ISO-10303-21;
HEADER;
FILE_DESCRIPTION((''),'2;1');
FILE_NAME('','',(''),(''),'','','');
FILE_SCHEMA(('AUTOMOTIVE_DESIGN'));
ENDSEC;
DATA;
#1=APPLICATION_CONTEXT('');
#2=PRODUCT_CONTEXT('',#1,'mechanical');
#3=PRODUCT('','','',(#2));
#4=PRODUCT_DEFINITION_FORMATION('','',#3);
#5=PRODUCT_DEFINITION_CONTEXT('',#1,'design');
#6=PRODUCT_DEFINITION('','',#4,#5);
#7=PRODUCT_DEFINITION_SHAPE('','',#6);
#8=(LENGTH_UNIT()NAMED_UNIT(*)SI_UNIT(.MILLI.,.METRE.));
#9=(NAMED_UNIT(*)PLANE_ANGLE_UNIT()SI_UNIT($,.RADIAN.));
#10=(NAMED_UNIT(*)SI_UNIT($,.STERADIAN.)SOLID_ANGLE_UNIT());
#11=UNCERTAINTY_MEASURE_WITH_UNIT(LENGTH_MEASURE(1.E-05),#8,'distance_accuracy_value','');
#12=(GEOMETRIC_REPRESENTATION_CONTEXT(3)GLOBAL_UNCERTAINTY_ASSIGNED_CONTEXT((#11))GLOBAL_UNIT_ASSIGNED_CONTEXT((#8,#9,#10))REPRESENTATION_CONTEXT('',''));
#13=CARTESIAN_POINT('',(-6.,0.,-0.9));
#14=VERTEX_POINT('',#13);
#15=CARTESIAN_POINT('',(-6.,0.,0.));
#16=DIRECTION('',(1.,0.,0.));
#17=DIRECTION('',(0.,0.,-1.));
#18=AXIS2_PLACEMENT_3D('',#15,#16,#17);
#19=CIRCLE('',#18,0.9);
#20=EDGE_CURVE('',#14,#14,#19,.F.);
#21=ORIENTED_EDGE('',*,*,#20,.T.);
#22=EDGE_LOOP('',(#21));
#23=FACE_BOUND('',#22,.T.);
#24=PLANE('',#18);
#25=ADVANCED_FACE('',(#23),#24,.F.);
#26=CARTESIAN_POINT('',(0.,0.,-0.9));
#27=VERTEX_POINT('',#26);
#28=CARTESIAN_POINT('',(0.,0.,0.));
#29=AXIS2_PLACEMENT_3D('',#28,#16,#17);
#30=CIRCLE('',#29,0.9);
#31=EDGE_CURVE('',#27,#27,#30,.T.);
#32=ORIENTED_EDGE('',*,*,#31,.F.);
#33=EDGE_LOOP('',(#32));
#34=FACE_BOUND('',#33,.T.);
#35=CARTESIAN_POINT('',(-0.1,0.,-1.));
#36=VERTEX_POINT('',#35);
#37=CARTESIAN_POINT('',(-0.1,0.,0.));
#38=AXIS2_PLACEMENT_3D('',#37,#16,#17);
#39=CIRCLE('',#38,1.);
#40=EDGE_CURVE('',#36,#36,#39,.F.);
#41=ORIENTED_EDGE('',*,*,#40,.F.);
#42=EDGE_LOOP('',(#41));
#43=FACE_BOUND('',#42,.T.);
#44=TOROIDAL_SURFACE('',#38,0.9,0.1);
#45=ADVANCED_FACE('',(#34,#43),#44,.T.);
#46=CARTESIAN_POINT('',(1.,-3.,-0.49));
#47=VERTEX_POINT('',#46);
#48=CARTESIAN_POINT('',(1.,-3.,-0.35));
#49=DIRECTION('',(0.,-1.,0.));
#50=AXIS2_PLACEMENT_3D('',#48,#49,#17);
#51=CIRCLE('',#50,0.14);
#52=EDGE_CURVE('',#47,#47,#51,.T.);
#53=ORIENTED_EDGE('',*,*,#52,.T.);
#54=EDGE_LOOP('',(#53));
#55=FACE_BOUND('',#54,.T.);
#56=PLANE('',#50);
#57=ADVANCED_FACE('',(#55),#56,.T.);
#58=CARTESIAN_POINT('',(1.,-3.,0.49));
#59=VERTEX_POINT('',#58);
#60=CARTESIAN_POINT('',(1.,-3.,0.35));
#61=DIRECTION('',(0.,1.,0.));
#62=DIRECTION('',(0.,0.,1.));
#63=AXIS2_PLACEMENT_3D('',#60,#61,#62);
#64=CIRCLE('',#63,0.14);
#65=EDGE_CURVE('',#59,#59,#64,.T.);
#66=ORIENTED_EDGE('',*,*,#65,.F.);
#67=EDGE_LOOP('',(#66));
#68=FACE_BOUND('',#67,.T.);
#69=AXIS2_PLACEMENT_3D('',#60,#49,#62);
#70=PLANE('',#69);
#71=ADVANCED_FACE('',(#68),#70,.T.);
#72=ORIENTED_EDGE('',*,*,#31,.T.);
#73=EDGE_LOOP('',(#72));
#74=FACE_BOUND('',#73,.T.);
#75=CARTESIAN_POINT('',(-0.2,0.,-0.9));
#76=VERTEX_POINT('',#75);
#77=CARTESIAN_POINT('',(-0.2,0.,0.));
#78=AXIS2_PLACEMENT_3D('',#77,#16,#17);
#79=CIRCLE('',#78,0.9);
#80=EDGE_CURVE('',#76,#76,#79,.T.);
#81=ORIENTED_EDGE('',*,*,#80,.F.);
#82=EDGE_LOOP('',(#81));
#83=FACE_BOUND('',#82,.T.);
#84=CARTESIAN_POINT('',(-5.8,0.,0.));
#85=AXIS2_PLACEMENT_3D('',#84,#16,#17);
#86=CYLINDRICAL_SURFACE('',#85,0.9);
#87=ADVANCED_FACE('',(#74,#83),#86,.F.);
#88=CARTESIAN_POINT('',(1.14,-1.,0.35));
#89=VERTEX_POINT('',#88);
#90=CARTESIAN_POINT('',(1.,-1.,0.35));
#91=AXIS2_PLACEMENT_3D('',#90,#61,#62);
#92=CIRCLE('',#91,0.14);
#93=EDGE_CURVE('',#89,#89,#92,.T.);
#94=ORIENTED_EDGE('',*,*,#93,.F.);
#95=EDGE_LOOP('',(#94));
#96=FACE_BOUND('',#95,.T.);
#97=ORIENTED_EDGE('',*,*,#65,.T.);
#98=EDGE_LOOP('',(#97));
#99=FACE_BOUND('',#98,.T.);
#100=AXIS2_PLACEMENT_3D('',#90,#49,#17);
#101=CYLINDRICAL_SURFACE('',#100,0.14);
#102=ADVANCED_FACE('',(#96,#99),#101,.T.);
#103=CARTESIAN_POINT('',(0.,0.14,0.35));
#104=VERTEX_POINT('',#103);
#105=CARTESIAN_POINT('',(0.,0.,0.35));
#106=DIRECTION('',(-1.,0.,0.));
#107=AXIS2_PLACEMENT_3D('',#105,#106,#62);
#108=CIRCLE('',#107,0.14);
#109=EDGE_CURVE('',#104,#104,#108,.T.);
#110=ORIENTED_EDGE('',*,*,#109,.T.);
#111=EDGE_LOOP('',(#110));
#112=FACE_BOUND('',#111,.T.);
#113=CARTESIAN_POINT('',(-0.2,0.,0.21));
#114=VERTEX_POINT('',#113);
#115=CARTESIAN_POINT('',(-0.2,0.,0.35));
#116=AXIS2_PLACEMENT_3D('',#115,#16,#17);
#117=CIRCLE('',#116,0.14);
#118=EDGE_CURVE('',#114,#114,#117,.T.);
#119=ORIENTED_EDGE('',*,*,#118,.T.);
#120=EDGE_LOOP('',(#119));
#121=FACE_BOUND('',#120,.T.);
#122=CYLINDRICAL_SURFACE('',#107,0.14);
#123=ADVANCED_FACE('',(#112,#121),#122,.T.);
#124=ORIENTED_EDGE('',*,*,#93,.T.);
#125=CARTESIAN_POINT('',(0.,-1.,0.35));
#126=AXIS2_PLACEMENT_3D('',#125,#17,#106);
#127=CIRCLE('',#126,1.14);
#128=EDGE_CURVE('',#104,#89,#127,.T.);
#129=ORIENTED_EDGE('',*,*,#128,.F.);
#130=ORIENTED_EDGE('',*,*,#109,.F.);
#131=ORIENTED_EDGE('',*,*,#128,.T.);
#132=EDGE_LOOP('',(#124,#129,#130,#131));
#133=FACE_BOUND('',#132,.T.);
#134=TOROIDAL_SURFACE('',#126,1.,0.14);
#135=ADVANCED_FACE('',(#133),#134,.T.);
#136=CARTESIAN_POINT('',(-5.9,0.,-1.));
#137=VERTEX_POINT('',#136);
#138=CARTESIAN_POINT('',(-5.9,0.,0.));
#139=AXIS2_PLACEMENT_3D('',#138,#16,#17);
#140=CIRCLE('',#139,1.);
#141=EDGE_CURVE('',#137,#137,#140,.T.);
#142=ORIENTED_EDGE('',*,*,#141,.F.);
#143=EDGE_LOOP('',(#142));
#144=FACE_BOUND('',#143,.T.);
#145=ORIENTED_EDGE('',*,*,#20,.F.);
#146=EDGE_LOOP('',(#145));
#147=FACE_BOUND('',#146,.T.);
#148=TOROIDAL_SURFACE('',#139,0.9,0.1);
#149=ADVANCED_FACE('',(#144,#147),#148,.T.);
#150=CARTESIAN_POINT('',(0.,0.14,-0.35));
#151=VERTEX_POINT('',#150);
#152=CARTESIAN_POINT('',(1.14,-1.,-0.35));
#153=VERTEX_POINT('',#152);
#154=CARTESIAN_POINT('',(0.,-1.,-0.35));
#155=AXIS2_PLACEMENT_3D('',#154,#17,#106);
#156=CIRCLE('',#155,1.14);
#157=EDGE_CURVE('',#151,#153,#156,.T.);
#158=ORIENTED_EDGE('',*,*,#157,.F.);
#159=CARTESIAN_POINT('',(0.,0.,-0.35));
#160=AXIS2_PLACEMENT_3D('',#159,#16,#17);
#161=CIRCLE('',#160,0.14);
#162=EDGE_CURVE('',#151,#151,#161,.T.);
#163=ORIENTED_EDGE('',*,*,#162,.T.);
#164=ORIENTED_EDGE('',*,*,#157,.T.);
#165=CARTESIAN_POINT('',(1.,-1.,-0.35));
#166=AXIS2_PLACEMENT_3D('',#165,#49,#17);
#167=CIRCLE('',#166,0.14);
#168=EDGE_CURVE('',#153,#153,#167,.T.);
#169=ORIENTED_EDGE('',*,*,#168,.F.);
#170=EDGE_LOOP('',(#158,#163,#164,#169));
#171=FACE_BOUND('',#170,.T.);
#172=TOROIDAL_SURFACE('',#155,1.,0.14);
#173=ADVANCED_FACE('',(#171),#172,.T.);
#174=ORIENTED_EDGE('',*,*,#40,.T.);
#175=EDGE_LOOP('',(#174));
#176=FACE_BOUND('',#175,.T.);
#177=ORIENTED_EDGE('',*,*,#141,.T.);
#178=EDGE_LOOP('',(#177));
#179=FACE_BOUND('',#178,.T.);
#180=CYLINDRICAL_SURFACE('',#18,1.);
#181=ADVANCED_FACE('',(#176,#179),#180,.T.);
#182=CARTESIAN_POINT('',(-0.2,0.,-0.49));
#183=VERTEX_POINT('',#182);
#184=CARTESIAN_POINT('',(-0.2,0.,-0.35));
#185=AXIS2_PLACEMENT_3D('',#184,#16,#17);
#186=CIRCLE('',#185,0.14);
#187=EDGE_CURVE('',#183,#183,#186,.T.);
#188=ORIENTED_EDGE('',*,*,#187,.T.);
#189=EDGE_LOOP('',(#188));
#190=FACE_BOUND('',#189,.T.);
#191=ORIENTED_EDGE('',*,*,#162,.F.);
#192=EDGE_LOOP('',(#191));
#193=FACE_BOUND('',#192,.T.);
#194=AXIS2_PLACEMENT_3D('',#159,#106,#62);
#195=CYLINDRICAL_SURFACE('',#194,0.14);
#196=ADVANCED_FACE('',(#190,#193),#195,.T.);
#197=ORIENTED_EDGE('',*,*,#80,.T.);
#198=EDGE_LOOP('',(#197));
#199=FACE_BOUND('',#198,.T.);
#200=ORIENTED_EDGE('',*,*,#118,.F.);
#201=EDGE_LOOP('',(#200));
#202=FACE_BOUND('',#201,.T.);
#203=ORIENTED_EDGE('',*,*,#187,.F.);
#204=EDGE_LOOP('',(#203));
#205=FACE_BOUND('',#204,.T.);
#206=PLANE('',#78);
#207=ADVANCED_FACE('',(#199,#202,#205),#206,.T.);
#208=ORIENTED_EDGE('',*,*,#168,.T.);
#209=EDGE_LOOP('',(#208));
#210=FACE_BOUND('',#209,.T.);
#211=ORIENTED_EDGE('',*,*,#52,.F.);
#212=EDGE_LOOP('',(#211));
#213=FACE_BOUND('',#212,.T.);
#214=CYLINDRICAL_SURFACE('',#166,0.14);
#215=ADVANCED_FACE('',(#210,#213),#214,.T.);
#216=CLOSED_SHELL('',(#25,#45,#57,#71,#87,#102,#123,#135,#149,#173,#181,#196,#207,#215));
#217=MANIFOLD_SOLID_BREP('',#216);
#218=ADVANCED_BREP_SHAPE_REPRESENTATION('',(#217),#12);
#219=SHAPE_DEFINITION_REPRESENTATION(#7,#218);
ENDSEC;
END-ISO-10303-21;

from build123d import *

# Parameters (mm, degrees)
SKETCH_1_R          = 1
EXTRUDE_1_DEPTH     = 6
SKETCH_2_R          = 0.9
CUT_EXTRUDE_1_DEPTH = 5.8
SKETCH_5_R          = 0.9
EXTRUDE_4_DEPTH     = 5.6
SKETCH_7_R          = 0.14
FILLET_1_R          = 0.1
FILLET_2_R          = 0.1


with BuildPart() as part:
    # 草图1 → 凸台-拉伸1 (new body)
    with BuildSketch(Plane(origin=(0, 0, 0), x_dir=(0, 0, -1), z_dir=(1, 0, 0))):
        Circle(SKETCH_1_R)
    extrude(amount=-EXTRUDE_1_DEPTH)

    # 草图2 → 切除-拉伸1 (cut)
    with BuildSketch(Plane(origin=(0, 0, 0), x_dir=(0, 0, -1), z_dir=(1, 0, 0))):
        Circle(SKETCH_2_R)
    extrude(amount=-CUT_EXTRUDE_1_DEPTH, mode=Mode.SUBTRACT)



with BuildPart() as body_2:
    # 草图5 → 凸台-拉伸4 (new body)
    with BuildSketch(Plane(origin=(-5.8, 0, 0), x_dir=(0, 0, -1), z_dir=(1, 0, 0))):
        Circle(SKETCH_5_R)
    extrude(amount=EXTRUDE_4_DEPTH)


with BuildPart() as part_1:
    add(part.part)

    add(body_2.part)  # 扫描1 merges body 2
    # 扫描1: sweep along a curve in space
    with BuildLine() as sweep_1_path:
        Line((-0.2, 0, -0.35), (0, 0, -0.35))
        ThreePointArc((0, 0, -0.35), (0.707106781, -0.292893219, -0.35), (1, -1, -0.35))
        Line((1, -1, -0.35), (1, -3, -0.35))
    # 草图7 → 扫描1 (sweep)
    with BuildSketch(Plane(origin=(-0.2, 0, 0), x_dir=(0, 0, -1), z_dir=(1, 0, 0))):
        with Locations((0.35, 0)):
            Circle(SKETCH_7_R)
    sweep_1 = sweep(path=sweep_1_path.line)

    # 镜向1: 扫描1 across plane
    add(sweep_1.mirror(Plane.XY))

    # 圆角1
    fillet_1_edges = [part_1.edges().sort_by_distance(p)[0] for p in [
        (-6, 0, 1),
    ]]
    fillet(fillet_1_edges, radius=FILLET_1_R)

    # 圆角2
    fillet_2_edges = [part_1.edges().sort_by_distance(p)[0] for p in [
        (0, 0, 1),
    ]]
    fillet(fillet_2_edges, radius=FILLET_2_R - 0.0001)  # a hair under: the kernel refuses the full size


solid = part_1.part
